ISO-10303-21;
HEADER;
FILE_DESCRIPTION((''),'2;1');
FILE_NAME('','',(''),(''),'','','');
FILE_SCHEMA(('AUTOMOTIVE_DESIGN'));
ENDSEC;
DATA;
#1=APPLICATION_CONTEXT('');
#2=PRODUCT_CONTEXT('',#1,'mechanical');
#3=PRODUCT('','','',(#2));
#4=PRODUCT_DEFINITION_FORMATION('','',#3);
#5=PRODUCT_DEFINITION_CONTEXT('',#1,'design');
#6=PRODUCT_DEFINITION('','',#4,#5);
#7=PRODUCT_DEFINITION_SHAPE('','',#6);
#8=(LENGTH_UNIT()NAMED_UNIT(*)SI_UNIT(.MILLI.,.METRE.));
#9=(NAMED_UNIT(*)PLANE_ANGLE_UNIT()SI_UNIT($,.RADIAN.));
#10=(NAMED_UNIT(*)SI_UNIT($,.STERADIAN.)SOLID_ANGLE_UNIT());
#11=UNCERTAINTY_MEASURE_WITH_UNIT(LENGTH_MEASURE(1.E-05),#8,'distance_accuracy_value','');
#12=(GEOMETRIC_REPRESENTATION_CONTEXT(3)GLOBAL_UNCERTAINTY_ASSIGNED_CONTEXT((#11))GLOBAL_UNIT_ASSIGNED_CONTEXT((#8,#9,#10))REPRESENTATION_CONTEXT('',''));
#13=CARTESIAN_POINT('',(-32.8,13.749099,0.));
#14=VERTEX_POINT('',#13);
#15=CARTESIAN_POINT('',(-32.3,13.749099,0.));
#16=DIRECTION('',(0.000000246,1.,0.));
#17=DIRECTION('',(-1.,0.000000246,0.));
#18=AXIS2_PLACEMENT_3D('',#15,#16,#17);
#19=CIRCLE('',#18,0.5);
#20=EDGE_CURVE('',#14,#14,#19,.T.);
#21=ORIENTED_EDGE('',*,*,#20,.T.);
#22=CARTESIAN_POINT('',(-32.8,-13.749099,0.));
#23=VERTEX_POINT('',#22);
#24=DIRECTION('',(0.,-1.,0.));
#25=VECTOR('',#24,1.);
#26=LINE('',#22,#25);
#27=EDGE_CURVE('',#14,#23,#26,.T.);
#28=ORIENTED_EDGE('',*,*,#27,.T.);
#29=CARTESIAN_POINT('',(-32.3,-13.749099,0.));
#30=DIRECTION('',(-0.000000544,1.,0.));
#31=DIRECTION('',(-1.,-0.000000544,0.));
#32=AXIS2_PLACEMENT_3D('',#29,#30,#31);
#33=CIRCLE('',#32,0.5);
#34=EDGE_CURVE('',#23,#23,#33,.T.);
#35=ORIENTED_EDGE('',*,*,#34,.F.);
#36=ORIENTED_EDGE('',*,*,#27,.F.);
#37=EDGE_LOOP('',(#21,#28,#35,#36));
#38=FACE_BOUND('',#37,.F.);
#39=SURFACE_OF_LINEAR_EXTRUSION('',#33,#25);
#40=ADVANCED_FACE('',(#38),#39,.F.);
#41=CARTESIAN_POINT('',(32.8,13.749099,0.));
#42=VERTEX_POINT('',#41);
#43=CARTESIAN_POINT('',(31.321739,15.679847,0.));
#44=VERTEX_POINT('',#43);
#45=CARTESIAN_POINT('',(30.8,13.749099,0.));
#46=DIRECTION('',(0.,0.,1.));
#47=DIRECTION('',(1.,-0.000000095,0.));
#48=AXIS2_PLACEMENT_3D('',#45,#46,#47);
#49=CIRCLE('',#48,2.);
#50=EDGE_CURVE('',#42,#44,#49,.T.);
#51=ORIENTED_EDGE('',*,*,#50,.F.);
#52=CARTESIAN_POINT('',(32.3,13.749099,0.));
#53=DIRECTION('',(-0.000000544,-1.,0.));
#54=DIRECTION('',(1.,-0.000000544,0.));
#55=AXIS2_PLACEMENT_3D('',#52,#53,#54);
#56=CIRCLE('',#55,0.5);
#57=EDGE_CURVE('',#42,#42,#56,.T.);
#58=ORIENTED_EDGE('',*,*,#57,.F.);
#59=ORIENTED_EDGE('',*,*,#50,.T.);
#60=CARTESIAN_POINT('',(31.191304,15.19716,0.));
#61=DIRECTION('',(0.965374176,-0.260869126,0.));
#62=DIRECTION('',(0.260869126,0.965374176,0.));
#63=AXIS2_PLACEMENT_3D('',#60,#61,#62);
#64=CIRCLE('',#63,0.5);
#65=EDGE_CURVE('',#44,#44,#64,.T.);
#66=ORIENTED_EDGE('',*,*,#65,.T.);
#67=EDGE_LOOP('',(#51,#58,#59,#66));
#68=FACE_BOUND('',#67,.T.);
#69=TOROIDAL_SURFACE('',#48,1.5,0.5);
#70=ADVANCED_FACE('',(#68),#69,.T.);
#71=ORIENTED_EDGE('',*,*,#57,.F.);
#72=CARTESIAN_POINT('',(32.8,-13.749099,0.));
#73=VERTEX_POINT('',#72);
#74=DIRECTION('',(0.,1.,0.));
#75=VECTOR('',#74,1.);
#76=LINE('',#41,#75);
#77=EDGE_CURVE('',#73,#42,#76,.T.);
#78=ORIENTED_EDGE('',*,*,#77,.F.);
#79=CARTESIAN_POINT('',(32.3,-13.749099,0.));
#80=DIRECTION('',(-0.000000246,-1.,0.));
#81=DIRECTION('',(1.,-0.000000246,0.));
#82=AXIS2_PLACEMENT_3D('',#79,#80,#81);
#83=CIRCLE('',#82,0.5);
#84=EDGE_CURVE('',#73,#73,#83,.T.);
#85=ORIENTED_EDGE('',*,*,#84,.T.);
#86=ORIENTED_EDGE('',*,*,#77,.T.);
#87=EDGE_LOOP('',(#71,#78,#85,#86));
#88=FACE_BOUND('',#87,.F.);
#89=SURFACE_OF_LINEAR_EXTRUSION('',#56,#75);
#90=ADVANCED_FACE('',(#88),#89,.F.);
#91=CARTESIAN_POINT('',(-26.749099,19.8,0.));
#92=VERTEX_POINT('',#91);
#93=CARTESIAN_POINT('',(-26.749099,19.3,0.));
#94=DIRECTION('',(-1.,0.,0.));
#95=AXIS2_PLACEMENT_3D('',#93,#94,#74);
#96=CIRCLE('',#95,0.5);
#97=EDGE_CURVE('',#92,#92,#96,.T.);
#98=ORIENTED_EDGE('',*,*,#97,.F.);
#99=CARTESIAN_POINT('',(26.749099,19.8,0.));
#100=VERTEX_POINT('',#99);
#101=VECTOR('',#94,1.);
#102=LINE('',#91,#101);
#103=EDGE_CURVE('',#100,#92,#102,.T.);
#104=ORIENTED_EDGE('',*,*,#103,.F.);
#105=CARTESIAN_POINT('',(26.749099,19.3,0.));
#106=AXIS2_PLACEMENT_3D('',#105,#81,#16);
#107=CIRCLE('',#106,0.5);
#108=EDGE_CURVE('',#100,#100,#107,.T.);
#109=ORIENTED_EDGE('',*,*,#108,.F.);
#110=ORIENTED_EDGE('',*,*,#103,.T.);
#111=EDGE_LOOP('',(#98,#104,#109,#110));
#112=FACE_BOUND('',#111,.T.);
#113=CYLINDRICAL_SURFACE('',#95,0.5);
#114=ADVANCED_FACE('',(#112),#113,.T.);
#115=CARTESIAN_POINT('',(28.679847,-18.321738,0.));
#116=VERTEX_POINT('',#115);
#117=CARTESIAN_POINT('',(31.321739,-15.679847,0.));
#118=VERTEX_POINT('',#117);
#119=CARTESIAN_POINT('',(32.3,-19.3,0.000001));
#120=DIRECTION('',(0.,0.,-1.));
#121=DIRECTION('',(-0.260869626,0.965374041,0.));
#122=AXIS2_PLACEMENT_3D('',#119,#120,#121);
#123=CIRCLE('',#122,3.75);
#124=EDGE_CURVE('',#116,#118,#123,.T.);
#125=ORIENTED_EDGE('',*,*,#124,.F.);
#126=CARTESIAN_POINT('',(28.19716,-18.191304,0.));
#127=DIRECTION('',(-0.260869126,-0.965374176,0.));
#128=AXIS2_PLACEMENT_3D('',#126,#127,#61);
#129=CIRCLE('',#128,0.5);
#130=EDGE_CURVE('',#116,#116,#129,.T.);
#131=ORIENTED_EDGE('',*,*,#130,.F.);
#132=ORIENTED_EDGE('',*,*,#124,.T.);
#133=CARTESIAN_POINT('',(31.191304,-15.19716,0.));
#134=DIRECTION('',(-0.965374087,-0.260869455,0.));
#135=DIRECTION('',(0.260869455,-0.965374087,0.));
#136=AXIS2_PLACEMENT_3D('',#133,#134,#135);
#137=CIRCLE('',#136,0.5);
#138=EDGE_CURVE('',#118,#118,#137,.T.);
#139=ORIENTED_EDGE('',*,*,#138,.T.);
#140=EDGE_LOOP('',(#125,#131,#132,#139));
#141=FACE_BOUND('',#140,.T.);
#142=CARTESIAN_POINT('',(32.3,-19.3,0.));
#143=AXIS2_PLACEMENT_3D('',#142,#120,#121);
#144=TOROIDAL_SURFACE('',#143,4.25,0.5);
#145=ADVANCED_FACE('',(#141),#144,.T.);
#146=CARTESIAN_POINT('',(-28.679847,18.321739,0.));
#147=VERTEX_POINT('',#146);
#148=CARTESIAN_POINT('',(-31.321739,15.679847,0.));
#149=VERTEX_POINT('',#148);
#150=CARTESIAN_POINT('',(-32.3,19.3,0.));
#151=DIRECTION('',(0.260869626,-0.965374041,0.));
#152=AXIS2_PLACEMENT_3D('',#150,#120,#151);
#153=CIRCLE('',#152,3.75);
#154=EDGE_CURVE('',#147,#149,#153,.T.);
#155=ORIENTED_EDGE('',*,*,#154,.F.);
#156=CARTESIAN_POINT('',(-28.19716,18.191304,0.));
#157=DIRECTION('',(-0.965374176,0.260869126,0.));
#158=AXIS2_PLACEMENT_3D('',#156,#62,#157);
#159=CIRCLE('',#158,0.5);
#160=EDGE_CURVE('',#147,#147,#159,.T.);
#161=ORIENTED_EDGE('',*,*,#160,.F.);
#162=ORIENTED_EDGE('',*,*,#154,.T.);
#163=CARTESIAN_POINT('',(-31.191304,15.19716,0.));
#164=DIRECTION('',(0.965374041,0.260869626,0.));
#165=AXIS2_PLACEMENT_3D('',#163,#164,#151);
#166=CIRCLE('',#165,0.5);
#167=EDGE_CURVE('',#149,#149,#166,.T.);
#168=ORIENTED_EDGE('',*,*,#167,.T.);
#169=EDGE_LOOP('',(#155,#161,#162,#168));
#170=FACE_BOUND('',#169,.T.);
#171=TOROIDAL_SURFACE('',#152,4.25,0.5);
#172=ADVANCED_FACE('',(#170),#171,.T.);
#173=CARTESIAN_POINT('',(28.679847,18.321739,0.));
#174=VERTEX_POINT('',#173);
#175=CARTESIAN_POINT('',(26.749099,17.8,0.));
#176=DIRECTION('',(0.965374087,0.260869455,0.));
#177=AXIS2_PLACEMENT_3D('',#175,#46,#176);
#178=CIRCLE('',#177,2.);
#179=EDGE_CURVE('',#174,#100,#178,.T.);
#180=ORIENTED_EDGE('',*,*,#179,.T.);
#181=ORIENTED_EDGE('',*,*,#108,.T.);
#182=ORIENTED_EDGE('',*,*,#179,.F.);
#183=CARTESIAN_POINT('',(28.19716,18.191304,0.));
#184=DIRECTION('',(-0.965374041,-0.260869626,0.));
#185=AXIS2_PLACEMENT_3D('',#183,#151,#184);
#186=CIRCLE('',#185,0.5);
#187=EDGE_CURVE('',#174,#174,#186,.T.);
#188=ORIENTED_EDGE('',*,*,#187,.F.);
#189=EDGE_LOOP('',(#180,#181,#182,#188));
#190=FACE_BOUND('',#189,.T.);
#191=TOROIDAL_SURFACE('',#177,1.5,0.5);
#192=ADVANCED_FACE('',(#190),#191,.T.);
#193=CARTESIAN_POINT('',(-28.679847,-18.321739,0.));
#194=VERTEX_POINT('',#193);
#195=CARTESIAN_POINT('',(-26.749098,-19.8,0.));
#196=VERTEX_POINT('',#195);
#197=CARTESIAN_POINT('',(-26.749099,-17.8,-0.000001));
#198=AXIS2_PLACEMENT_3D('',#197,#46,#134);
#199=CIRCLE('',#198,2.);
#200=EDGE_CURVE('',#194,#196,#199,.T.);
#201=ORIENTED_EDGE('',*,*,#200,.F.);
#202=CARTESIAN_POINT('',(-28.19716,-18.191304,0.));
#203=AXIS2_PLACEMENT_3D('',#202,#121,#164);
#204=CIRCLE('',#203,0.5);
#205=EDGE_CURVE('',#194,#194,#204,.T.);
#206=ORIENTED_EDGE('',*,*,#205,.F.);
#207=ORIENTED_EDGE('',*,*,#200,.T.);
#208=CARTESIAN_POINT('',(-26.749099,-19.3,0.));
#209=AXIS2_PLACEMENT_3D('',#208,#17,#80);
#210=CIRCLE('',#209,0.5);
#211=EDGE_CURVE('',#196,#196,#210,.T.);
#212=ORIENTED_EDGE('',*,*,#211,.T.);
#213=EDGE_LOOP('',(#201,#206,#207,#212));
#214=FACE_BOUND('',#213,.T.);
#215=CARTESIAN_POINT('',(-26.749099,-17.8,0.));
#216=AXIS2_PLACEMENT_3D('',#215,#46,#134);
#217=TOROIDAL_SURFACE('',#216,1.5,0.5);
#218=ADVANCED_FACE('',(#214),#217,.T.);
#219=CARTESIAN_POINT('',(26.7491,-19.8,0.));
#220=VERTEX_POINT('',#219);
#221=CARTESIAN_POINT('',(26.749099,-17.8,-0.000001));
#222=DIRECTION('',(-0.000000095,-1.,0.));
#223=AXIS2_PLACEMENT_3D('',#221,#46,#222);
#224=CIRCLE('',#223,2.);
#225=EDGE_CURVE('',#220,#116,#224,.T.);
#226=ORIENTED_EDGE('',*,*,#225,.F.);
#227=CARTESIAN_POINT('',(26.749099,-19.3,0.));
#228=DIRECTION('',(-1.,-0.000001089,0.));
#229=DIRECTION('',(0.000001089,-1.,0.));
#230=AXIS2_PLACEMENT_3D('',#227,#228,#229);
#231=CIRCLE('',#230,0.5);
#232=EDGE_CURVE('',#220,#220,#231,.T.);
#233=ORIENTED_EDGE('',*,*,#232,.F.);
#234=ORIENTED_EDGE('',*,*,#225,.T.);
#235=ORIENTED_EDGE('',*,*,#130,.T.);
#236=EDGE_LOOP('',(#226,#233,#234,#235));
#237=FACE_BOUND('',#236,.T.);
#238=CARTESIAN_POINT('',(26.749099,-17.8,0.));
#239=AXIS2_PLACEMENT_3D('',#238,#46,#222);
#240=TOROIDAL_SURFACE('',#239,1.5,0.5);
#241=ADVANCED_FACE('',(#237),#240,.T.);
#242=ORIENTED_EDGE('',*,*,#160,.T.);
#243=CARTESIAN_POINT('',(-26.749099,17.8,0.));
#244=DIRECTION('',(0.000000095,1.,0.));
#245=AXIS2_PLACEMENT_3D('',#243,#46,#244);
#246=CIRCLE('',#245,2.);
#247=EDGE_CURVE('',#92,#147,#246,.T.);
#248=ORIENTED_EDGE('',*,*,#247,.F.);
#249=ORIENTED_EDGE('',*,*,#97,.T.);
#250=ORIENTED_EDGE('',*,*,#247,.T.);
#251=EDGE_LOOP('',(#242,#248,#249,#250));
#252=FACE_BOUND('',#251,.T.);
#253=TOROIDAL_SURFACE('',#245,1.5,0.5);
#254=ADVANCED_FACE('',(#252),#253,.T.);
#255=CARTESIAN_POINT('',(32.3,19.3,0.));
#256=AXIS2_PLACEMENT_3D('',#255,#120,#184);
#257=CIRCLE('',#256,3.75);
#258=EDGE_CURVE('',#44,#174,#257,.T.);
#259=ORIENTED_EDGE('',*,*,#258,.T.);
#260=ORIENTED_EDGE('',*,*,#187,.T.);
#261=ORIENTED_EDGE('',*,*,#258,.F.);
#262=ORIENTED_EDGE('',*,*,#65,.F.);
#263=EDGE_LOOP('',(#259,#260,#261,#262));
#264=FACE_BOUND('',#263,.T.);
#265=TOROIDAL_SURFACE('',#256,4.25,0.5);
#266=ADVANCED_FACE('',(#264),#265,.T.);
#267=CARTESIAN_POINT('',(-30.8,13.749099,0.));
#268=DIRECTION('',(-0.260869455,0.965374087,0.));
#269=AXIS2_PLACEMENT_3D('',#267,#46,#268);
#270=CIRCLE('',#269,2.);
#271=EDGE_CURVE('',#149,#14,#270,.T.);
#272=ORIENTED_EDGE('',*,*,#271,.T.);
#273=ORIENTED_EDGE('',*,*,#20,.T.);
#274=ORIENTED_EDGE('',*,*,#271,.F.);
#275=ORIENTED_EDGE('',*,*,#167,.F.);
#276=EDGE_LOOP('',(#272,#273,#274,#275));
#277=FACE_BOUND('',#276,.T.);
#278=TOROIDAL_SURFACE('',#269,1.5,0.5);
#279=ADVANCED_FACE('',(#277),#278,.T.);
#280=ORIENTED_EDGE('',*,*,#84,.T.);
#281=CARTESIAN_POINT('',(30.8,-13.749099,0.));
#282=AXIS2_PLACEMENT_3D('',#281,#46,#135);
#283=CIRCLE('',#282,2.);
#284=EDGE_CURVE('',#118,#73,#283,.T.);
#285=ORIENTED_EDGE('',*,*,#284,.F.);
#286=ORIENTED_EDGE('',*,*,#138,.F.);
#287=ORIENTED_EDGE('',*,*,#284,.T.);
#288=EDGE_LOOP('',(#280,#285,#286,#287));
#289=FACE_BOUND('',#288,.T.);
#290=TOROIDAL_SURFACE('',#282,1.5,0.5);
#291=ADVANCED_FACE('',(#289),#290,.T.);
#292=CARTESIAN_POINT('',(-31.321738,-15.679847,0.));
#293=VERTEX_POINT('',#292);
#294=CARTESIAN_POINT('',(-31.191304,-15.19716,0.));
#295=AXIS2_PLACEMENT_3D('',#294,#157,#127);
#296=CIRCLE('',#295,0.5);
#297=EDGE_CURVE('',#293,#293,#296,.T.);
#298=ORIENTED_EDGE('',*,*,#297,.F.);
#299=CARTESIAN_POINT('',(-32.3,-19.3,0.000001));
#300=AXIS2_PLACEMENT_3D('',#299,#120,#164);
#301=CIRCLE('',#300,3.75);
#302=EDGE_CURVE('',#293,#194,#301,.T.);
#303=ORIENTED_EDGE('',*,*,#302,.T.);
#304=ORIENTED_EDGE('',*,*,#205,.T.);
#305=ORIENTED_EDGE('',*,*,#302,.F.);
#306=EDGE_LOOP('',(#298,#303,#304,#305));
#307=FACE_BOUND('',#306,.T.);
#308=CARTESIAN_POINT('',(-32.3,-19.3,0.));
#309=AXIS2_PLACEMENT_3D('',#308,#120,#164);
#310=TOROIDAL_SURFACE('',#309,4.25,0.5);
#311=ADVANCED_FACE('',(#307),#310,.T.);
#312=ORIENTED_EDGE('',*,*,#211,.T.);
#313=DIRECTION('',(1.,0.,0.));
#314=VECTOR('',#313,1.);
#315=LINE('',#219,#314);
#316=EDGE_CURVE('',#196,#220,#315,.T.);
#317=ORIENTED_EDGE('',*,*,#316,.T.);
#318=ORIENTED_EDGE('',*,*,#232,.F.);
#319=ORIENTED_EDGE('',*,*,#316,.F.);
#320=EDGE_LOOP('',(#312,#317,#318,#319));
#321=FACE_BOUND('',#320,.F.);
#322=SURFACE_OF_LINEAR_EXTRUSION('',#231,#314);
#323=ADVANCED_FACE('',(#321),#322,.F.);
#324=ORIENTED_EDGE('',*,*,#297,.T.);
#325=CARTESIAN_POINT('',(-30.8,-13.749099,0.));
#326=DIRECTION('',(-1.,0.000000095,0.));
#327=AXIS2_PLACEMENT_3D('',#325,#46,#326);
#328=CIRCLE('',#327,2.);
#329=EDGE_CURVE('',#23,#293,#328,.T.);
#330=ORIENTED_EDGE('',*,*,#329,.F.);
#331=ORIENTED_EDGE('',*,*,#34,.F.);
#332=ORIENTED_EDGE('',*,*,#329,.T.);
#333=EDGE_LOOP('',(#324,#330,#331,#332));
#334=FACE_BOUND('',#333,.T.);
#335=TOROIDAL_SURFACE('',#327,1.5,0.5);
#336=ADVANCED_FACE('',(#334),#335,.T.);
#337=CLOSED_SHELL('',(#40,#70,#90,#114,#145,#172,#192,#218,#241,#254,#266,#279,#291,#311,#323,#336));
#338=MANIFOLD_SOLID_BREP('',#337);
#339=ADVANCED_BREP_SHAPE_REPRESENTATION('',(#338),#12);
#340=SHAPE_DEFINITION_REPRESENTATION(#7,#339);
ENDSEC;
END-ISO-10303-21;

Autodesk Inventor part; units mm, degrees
ref_plane "YZ Plane" through (0, 0, 0) normal (1, 0, 0) x (0, 1, 0)
ref_plane "XZ Plane" through (0, 0, 0) normal (0, 1, 0) x (-1, 0, 0)
ref_plane "XY Plane" through (0, 0, 0) normal (0, 0, 1) x (1, 0, 0)
sketch "Boceto1" plane through (0, 0, 0) normal (0, 0, 1) x (1, 0, 0)
  arc A0 (-31.034783, 14.617936) -> (-27.617936, 18.034783) centre (-32.3, 19.3) ccw construction
  arc A1 (-26.749099, 18.7) -> (-27.617936, 18.034783) centre (-26.749099, 17.8) ccw construction
  line L0 (26.749099, 18.7) -> (-26.749099, 18.7) construction
  arc A2 (27.617936, 18.034783) -> (26.749099, 18.7) centre (26.749099, 17.8) ccw construction
  arc A3 (27.617936, 18.034783) -> (31.034783, 14.617936) centre (32.3, 19.3) ccw construction
  arc A4 (31.7, 13.749099) -> (31.034783, 14.617936) centre (30.8, 13.749099) ccw construction
  line L1 (31.7, -13.749099) -> (31.7, 13.749099) construction
  arc A5 (31.034783, -14.617936) -> (31.7, -13.749099) centre (30.8, -13.749099) ccw construction
  arc A6 (31.034783, -14.617936) -> (27.617936, -18.034783) centre (32.3, -19.3) ccw construction
  arc A7 (26.749099, -18.7) -> (27.617936, -18.034783) centre (26.749099, -17.8) ccw construction
  line L2 (-26.749099, -18.7) -> (26.749099, -18.7) construction
  arc A8 (-27.617936, -18.034783) -> (-26.749099, -18.7) centre (-26.749099, -17.8) ccw construction
  arc A9 (-27.617936, -18.034783) -> (-31.034783, -14.617936) centre (-32.3, -19.3) ccw construction
  arc A10 (-31.7, -13.749099) -> (-31.034783, -14.617936) centre (-30.8, -13.749099) ccw construction
  line L3 (-31.7, 13.749099) -> (-31.7, -13.749099) construction
  arc A11 (-31.034783, 14.617936) -> (-31.7, 13.749099) centre (-30.8, 13.749099) ccw construction
  arc A12 (-26.749099, 19.9) -> (-28.776385, 18.347826) centre (-26.749099, 17.8) ccw construction
  arc A13 (-31.347826, 15.776385) -> (-28.776385, 18.347826) centre (-32.3, 19.3) ccw construction
  arc A14 (-31.347826, 15.776385) -> (-32.9, 13.749099) centre (-30.8, 13.749099) ccw construction
  line L4 (-32.9, -13.749099) -> (-32.9, 13.749099) construction
  arc A15 (-32.9, -13.749099) -> (-31.347826, -15.776385) centre (-30.8, -13.749099) ccw construction
  arc A16 (-28.776385, -18.347826) -> (-31.347826, -15.776385) centre (-32.3, -19.3) ccw construction
  arc A17 (-28.776385, -18.347826) -> (-26.749099, -19.9) centre (-26.749099, -17.8) ccw construction
  line L5 (26.749099, -19.9) -> (-26.749099, -19.9) construction
  arc A18 (26.749099, -19.9) -> (28.776385, -18.347826) centre (26.749099, -17.8) ccw construction
  arc A19 (31.347826, -15.776385) -> (28.776385, -18.347826) centre (32.3, -19.3) ccw construction
  arc A20 (31.347826, -15.776385) -> (32.9, -13.749099) centre (30.8, -13.749099) ccw construction
  line L6 (32.9, 13.749099) -> (32.9, -13.749099) construction
  arc A21 (32.9, 13.749099) -> (31.347826, 15.776385) centre (30.8, 13.749099) ccw construction
  arc A22 (28.776385, 18.347826) -> (31.347826, 15.776385) centre (32.3, 19.3) ccw construction
  arc A23 (28.776385, 18.347826) -> (26.749099, 19.9) centre (26.749099, 17.8) ccw construction
  line L7 (-26.749099, 19.9) -> (26.749099, 19.9) construction
  arc A24 (28.19716, 18.191304) -> (26.749099, 19.3) centre (26.749099, 17.8) ccw
  arc A25 (28.19716, 18.191304) -> (31.191304, 15.19716) centre (32.3, 19.3) ccw
  arc A26 (32.3, 13.749099) -> (31.191304, 15.19716) centre (30.8, 13.749099) ccw
  line L8 (32.3, 13.749099) -> (32.3, -13.749099)
  arc A27 (31.191304, -15.19716) -> (32.3, -13.749099) centre (30.8, -13.749099) ccw
  arc A28 (31.191304, -15.19716) -> (28.19716, -18.191304) centre (32.3, -19.3) ccw
  arc A29 (26.749099, -19.3) -> (28.19716, -18.191304) centre (26.749099, -17.8) ccw
  line L9 (26.749099, -19.3) -> (-26.749099, -19.3)
  arc A30 (-28.19716, -18.191304) -> (-26.749099, -19.3) centre (-26.749099, -17.8) ccw
  arc A31 (-28.19716, -18.191304) -> (-31.191304, -15.19716) centre (-32.3, -19.3) ccw
  arc A32 (-32.3, -13.749099) -> (-31.191304, -15.19716) centre (-30.8, -13.749099) ccw
  line L10 (-32.3, -13.749099) -> (-32.3, 13.749099)
  arc A33 (-31.191304, 15.19716) -> (-32.3, 13.749099) centre (-30.8, 13.749099) ccw
  arc A34 (-31.191304, 15.19716) -> (-28.19716, 18.191304) centre (-32.3, 19.3) ccw
  arc A35 (-26.749099, 19.3) -> (-28.19716, 18.191304) centre (-26.749099, 17.8) ccw
  line L11 (-26.749099, 19.3) -> (26.749099, 19.3)
  point P0 (0, 0)
  dimension "d0" = 0.6
sketch "Boceto2" plane through (0, 0, 0) normal (1, 0, 0) x (0, 1, 0)
  circle A0 centre (19.3, 0) radius 0.5
  point P0 (0, 0)
  point P1 (19.3, 0)
  dimension "d1" = 1
sweep "Barrido1" add profiles "Boceto2" path "Boceto1"
properties part number "3d_DAA - Glass o-ring 60x1" material "Goma NBR"
